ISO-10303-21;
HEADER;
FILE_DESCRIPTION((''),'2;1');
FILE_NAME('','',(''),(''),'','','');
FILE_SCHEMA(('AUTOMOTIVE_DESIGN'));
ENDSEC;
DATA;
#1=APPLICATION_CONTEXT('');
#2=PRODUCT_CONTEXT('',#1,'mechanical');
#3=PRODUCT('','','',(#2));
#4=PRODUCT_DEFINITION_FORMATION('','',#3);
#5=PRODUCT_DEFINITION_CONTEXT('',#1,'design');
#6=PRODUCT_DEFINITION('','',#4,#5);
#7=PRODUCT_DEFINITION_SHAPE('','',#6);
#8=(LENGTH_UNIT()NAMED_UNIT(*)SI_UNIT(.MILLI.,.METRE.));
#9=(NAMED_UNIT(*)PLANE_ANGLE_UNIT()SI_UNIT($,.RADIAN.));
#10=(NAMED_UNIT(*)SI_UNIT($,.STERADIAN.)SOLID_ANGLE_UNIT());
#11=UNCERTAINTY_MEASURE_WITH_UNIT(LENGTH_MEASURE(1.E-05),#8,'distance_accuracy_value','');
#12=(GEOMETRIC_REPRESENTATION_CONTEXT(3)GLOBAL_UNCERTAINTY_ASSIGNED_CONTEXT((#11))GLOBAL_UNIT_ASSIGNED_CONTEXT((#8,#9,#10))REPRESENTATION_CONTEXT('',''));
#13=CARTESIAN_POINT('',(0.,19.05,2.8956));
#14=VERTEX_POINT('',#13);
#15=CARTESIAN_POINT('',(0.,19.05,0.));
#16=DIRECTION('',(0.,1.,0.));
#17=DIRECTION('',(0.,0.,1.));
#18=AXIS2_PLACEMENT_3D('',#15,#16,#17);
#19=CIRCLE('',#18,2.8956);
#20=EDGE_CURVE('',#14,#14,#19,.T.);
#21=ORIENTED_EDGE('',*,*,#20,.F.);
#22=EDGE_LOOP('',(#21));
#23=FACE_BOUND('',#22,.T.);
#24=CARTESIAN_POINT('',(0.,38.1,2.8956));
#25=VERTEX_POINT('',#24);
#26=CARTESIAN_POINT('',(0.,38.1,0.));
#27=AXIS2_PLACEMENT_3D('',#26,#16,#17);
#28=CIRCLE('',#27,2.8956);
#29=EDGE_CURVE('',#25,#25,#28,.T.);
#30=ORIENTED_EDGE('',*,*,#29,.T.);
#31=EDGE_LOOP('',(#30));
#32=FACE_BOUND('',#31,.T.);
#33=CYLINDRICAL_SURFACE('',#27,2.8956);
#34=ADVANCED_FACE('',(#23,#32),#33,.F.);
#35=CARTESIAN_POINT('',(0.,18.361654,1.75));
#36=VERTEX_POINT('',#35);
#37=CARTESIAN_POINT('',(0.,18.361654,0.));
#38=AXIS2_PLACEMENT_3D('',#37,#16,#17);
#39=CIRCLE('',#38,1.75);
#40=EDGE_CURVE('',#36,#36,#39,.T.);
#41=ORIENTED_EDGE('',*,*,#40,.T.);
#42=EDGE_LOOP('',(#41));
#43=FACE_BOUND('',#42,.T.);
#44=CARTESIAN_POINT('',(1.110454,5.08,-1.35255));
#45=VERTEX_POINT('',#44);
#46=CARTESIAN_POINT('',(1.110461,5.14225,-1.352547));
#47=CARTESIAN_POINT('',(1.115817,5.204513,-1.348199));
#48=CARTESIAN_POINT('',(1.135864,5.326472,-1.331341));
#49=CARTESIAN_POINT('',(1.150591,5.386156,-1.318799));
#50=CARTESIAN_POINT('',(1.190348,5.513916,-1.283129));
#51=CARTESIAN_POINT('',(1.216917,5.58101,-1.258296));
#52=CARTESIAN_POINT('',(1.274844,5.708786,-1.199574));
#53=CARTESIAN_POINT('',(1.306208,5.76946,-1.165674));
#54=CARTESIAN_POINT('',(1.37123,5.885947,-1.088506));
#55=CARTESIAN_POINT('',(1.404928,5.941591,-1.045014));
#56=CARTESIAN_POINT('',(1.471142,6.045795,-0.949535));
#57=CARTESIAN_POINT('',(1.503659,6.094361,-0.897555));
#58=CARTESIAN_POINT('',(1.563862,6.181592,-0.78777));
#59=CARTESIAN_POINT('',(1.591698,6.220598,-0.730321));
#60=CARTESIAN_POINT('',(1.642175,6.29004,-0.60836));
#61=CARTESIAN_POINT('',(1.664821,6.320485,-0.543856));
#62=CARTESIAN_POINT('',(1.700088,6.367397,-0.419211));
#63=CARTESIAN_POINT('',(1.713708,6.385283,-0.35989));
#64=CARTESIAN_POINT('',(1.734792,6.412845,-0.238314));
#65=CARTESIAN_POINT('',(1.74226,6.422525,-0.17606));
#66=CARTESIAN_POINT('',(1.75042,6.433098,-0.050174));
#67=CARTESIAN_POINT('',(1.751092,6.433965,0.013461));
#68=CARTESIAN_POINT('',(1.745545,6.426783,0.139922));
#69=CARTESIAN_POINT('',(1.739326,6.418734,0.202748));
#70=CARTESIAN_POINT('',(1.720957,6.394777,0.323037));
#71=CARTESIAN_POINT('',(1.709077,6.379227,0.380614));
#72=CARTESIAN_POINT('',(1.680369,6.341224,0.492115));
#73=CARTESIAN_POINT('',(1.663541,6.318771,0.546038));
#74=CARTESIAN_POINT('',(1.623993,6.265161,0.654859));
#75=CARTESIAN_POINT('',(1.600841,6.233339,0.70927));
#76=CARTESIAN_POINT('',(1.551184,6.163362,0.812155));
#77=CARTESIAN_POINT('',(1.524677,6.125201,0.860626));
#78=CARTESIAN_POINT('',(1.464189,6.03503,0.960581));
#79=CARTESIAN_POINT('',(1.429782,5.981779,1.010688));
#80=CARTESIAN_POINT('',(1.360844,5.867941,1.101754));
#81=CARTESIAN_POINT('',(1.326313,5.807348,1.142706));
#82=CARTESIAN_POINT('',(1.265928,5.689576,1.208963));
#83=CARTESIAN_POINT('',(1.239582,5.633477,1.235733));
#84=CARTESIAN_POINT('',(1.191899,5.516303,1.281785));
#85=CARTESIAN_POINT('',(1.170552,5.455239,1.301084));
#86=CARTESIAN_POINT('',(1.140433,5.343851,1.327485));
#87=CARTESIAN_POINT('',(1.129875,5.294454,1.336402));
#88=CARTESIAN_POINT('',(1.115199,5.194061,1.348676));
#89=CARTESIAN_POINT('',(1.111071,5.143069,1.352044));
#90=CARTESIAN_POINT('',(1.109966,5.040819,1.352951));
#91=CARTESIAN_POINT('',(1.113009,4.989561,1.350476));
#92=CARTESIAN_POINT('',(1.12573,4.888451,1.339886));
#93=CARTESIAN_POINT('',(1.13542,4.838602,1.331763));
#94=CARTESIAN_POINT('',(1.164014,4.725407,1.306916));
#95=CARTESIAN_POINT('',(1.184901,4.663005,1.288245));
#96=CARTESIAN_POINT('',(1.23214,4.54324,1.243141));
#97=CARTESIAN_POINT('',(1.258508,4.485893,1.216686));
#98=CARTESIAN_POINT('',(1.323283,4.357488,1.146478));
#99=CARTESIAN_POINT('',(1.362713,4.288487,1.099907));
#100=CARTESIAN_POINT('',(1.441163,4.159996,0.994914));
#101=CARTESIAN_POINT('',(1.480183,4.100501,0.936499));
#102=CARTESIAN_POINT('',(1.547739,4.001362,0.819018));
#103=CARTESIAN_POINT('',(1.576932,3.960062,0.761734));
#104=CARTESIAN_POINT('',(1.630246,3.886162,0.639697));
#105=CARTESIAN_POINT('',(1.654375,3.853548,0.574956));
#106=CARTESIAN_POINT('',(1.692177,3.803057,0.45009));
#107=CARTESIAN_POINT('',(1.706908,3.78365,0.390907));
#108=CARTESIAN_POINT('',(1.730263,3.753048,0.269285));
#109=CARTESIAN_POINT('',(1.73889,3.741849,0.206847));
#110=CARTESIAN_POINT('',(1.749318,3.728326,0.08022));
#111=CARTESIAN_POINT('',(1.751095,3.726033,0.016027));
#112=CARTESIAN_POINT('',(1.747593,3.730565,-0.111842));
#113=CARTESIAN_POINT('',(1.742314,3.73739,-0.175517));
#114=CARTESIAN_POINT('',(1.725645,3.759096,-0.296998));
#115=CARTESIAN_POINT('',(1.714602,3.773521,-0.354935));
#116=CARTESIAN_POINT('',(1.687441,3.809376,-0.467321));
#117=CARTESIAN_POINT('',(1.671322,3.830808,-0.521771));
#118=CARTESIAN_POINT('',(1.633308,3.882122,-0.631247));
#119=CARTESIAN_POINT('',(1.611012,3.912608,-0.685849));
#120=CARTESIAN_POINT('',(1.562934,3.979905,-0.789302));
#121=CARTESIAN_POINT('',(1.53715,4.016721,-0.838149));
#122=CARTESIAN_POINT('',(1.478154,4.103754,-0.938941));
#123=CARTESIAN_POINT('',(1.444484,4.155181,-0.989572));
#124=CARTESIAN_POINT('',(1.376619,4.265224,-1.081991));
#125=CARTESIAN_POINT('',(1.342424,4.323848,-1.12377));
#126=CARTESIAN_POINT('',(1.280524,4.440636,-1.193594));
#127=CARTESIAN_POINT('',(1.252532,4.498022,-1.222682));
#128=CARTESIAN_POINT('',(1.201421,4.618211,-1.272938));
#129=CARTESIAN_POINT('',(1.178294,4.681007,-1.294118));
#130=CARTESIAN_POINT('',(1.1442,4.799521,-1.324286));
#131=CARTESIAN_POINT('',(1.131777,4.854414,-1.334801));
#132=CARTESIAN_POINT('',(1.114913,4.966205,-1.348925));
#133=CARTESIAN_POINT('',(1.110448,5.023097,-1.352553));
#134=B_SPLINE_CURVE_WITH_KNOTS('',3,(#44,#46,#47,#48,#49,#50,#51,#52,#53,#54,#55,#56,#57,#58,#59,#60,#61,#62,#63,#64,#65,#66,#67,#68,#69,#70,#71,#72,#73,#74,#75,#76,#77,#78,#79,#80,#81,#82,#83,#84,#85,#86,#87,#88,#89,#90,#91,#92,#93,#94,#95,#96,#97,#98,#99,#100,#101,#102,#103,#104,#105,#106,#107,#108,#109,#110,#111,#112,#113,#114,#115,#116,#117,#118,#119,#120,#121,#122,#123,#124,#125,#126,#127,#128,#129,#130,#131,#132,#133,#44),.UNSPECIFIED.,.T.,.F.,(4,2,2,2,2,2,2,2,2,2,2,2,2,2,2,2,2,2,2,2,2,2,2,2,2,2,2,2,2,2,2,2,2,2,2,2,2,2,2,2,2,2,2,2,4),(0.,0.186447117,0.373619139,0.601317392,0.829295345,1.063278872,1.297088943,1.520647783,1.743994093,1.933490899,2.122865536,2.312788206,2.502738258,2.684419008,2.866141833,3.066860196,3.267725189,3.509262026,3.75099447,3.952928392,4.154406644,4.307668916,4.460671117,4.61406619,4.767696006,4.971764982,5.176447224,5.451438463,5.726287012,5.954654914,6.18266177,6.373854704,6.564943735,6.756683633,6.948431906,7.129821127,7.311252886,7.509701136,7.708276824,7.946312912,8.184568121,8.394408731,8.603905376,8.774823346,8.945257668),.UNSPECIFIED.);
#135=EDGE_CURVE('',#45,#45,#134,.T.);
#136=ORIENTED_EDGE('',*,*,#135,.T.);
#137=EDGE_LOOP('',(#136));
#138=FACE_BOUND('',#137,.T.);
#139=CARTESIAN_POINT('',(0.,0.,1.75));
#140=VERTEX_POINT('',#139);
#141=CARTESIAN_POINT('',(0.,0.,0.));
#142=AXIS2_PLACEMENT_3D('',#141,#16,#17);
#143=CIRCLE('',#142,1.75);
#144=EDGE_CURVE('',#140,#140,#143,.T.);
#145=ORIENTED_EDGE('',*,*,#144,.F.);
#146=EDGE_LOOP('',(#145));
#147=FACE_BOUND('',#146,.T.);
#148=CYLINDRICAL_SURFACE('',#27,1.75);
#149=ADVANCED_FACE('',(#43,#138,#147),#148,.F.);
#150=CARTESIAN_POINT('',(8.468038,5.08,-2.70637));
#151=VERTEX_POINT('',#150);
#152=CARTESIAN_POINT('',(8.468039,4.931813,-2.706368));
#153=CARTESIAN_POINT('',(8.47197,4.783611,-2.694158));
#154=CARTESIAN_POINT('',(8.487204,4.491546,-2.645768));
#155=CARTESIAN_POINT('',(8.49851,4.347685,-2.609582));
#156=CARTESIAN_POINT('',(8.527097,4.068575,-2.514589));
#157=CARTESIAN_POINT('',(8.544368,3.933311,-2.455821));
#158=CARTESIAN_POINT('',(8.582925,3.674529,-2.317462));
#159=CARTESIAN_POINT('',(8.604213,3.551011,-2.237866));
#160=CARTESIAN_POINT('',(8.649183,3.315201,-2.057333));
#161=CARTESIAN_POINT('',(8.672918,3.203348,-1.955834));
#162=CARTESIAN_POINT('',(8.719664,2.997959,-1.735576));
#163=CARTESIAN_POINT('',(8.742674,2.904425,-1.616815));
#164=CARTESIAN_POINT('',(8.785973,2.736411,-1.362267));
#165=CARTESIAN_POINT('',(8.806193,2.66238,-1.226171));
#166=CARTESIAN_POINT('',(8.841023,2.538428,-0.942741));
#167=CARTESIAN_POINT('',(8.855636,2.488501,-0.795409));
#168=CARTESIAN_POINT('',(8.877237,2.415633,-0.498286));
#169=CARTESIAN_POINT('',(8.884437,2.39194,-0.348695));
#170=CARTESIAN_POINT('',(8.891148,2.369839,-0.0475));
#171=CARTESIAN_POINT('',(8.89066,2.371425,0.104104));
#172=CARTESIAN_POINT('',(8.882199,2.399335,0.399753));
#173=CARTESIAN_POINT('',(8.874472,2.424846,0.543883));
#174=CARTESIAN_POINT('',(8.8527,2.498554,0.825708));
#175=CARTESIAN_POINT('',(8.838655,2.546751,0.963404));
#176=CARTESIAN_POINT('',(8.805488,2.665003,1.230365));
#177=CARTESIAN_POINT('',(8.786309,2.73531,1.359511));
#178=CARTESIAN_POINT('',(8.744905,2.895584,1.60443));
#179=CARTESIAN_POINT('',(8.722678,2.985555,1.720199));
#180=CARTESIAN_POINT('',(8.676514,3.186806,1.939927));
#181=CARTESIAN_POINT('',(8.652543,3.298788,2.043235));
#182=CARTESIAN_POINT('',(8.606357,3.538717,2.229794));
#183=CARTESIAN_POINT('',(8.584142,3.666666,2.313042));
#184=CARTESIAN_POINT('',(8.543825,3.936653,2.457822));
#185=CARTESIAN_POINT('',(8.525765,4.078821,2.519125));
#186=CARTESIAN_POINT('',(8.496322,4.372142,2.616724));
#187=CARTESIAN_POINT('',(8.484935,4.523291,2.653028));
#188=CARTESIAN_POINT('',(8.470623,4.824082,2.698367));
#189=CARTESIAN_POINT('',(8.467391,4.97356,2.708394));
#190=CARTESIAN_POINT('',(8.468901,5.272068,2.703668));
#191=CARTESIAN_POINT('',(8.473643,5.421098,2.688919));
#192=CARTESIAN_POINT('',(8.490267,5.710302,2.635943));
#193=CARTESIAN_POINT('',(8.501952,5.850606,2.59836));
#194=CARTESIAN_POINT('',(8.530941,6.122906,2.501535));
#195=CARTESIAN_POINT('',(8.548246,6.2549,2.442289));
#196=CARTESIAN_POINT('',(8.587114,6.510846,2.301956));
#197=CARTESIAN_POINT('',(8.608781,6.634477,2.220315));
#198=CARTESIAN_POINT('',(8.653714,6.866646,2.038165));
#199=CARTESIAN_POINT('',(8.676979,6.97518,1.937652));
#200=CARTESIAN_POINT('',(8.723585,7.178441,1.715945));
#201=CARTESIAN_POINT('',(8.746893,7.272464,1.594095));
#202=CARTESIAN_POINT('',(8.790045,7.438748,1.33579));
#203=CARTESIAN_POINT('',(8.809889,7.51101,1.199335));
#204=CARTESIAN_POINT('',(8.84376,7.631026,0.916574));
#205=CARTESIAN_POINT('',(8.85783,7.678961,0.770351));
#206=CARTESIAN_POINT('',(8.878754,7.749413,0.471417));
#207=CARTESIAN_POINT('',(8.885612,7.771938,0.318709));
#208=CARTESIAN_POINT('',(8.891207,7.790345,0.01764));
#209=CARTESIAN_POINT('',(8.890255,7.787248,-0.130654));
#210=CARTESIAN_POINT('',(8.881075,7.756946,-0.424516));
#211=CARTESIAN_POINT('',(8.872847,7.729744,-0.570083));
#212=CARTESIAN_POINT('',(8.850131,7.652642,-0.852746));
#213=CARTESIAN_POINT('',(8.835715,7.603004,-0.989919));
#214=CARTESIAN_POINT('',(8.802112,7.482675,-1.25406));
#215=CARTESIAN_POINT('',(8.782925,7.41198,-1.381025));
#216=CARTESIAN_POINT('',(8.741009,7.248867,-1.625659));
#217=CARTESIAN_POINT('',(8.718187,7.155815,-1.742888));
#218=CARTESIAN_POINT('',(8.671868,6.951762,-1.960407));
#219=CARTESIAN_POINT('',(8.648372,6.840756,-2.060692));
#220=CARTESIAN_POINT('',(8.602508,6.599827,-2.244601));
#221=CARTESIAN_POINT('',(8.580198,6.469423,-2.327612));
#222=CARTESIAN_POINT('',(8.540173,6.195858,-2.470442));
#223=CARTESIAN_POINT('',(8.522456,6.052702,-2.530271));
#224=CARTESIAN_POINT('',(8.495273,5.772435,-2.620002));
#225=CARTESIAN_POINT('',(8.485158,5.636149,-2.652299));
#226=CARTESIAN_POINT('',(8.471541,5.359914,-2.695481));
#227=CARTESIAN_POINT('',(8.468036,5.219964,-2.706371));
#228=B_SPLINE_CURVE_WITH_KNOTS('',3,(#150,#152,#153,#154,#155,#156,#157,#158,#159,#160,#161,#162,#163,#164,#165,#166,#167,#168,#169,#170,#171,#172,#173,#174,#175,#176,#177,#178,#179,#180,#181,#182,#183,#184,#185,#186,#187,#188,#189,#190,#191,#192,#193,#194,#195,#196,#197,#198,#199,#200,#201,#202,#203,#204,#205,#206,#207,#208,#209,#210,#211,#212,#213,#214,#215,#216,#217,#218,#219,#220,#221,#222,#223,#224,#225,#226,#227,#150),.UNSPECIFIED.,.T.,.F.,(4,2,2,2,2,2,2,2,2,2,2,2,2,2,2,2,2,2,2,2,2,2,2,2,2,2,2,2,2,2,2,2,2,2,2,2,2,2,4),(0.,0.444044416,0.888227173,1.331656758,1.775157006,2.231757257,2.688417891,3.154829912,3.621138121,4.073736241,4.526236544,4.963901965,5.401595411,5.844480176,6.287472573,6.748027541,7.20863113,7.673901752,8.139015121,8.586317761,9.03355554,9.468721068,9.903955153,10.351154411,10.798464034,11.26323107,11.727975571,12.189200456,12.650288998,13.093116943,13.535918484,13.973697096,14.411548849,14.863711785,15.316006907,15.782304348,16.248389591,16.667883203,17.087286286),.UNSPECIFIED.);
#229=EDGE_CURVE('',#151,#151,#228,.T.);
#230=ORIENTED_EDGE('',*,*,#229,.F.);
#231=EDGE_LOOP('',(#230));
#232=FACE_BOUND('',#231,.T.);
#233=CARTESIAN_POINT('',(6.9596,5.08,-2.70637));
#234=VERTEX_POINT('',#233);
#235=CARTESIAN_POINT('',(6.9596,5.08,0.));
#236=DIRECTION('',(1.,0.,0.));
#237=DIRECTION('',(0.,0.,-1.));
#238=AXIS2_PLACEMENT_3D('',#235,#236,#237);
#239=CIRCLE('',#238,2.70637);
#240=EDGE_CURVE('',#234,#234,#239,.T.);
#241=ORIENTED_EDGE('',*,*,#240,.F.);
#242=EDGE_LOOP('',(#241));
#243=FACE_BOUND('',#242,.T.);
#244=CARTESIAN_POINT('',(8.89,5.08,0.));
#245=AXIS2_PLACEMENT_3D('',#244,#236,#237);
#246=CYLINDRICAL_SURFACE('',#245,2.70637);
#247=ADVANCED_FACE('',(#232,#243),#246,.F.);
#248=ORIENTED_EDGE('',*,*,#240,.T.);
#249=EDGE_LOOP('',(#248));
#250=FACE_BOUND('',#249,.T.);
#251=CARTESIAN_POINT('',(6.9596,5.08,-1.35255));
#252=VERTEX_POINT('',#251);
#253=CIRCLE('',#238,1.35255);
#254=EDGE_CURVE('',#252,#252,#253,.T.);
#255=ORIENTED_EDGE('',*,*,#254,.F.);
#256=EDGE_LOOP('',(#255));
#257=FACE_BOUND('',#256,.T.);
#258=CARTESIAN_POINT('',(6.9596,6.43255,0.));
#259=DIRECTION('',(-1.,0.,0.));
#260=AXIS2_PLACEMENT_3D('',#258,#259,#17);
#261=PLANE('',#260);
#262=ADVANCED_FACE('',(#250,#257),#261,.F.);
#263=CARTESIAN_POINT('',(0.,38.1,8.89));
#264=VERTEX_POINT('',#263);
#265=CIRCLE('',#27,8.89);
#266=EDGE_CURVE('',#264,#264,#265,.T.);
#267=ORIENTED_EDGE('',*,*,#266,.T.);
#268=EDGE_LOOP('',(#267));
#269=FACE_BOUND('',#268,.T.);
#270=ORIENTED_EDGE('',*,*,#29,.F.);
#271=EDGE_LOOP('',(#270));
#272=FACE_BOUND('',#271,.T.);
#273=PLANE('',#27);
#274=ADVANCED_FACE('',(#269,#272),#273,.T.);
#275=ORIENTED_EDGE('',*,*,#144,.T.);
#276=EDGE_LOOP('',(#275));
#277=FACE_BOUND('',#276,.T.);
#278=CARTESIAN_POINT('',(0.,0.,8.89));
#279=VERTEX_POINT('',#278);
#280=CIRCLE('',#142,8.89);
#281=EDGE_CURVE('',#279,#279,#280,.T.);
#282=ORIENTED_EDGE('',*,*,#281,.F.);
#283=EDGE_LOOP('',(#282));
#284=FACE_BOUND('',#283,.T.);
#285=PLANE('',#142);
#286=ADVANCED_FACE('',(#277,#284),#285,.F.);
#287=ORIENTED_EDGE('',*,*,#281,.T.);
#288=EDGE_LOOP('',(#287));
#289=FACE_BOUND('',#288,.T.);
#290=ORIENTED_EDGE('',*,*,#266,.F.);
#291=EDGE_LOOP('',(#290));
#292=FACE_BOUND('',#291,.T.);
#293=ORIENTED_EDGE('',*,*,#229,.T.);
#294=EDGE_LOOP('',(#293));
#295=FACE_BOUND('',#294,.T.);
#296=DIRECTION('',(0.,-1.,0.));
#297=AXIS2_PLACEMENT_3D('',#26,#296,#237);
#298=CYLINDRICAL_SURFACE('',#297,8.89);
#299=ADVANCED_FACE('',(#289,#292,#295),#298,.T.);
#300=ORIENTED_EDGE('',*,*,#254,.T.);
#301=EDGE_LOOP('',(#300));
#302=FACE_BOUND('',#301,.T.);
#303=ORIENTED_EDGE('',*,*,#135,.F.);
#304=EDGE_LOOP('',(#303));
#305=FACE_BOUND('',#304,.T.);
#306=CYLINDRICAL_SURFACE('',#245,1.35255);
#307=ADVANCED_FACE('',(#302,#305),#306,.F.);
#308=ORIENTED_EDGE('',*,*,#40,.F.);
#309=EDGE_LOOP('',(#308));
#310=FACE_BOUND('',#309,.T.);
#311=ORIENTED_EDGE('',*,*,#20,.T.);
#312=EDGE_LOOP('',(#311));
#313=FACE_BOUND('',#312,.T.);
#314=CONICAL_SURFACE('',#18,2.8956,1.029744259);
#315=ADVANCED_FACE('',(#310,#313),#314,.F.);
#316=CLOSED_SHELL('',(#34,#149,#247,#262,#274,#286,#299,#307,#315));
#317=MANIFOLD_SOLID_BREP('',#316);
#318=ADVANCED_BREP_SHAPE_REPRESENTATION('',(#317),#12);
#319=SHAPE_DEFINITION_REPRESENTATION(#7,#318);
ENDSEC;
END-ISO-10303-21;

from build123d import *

# Parameters (mm, degrees)
SKETCH1_R                  = 8.89
BOSS_EXTRUDE1_DEPTH        = 38.1
F_3_0MM_DOWEL_HOLE2_D      = 3.5
F_12_CLEARANCE_HOLE1_D     = 5.7912
F_12_CLEARANCE_HOLE1_DEPTH = 19.05
F_12_CLEARANCE_HOLE1_TIP   = 1.739852008


# Read off the part's stored shape, not the designer's step: CBORE for #2 Button Head Cap Screw1
with BuildPart() as part:
    # Sketch1 → Boss-Extrude1 (new body)
    with BuildSketch(Plane(origin=(0, 0, 0), x_dir=(1, 0, 0), z_dir=(0, 1, 0))):
        with Locations(Location((0, 0, 0), (0, 0, 90))):
            Circle(SKETCH1_R)
    extrude(amount=BOSS_EXTRUDE1_DEPTH)

    # Ø3.0mm Dowel Hole2 (through all)
    with Locations(Plane(origin=(0, 38.1, 0), x_dir=(1, 0, 0), z_dir=(0, 1, 0))):
        with Locations((0, 0)):
            Hole(F_3_0MM_DOWEL_HOLE2_D / 2)

    # CBORE for #2 Button Head Cap Screw1 outl → CBORE for #2 Button Head Cap Screw1 (revolve, cut)
    with BuildSketch(Plane(origin=(0, 5.08, 0), x_dir=(0, 1, 0), z_dir=(0, 0, -1))):
        Polygon((1.35255, 6.9596), (2.70637, 6.9596), (2.70637, 8.890055176), (0, 8.890055176), (0, 1.110061146), (1.35255, 1.110061146), align=None)
    revolve(axis=Axis((0, 5.08, 0), (1, 0, 0)), mode=Mode.SUBTRACT)

    # #12 Clearance Hole1
    with Locations(Plane(origin=(0, 38.1, 0), x_dir=(1, 0, 0), z_dir=(0, 1, 0))):
        with Locations((0, 0)):
            Hole(F_12_CLEARANCE_HOLE1_D / 2, depth=F_12_CLEARANCE_HOLE1_DEPTH)
            with Locations((0, 0, -(F_12_CLEARANCE_HOLE1_DEPTH + F_12_CLEARANCE_HOLE1_TIP / 2))):  # 118° drill point
                Cone(0, F_12_CLEARANCE_HOLE1_D / 2, F_12_CLEARANCE_HOLE1_TIP, mode=Mode.SUBTRACT)


solid = part.part
